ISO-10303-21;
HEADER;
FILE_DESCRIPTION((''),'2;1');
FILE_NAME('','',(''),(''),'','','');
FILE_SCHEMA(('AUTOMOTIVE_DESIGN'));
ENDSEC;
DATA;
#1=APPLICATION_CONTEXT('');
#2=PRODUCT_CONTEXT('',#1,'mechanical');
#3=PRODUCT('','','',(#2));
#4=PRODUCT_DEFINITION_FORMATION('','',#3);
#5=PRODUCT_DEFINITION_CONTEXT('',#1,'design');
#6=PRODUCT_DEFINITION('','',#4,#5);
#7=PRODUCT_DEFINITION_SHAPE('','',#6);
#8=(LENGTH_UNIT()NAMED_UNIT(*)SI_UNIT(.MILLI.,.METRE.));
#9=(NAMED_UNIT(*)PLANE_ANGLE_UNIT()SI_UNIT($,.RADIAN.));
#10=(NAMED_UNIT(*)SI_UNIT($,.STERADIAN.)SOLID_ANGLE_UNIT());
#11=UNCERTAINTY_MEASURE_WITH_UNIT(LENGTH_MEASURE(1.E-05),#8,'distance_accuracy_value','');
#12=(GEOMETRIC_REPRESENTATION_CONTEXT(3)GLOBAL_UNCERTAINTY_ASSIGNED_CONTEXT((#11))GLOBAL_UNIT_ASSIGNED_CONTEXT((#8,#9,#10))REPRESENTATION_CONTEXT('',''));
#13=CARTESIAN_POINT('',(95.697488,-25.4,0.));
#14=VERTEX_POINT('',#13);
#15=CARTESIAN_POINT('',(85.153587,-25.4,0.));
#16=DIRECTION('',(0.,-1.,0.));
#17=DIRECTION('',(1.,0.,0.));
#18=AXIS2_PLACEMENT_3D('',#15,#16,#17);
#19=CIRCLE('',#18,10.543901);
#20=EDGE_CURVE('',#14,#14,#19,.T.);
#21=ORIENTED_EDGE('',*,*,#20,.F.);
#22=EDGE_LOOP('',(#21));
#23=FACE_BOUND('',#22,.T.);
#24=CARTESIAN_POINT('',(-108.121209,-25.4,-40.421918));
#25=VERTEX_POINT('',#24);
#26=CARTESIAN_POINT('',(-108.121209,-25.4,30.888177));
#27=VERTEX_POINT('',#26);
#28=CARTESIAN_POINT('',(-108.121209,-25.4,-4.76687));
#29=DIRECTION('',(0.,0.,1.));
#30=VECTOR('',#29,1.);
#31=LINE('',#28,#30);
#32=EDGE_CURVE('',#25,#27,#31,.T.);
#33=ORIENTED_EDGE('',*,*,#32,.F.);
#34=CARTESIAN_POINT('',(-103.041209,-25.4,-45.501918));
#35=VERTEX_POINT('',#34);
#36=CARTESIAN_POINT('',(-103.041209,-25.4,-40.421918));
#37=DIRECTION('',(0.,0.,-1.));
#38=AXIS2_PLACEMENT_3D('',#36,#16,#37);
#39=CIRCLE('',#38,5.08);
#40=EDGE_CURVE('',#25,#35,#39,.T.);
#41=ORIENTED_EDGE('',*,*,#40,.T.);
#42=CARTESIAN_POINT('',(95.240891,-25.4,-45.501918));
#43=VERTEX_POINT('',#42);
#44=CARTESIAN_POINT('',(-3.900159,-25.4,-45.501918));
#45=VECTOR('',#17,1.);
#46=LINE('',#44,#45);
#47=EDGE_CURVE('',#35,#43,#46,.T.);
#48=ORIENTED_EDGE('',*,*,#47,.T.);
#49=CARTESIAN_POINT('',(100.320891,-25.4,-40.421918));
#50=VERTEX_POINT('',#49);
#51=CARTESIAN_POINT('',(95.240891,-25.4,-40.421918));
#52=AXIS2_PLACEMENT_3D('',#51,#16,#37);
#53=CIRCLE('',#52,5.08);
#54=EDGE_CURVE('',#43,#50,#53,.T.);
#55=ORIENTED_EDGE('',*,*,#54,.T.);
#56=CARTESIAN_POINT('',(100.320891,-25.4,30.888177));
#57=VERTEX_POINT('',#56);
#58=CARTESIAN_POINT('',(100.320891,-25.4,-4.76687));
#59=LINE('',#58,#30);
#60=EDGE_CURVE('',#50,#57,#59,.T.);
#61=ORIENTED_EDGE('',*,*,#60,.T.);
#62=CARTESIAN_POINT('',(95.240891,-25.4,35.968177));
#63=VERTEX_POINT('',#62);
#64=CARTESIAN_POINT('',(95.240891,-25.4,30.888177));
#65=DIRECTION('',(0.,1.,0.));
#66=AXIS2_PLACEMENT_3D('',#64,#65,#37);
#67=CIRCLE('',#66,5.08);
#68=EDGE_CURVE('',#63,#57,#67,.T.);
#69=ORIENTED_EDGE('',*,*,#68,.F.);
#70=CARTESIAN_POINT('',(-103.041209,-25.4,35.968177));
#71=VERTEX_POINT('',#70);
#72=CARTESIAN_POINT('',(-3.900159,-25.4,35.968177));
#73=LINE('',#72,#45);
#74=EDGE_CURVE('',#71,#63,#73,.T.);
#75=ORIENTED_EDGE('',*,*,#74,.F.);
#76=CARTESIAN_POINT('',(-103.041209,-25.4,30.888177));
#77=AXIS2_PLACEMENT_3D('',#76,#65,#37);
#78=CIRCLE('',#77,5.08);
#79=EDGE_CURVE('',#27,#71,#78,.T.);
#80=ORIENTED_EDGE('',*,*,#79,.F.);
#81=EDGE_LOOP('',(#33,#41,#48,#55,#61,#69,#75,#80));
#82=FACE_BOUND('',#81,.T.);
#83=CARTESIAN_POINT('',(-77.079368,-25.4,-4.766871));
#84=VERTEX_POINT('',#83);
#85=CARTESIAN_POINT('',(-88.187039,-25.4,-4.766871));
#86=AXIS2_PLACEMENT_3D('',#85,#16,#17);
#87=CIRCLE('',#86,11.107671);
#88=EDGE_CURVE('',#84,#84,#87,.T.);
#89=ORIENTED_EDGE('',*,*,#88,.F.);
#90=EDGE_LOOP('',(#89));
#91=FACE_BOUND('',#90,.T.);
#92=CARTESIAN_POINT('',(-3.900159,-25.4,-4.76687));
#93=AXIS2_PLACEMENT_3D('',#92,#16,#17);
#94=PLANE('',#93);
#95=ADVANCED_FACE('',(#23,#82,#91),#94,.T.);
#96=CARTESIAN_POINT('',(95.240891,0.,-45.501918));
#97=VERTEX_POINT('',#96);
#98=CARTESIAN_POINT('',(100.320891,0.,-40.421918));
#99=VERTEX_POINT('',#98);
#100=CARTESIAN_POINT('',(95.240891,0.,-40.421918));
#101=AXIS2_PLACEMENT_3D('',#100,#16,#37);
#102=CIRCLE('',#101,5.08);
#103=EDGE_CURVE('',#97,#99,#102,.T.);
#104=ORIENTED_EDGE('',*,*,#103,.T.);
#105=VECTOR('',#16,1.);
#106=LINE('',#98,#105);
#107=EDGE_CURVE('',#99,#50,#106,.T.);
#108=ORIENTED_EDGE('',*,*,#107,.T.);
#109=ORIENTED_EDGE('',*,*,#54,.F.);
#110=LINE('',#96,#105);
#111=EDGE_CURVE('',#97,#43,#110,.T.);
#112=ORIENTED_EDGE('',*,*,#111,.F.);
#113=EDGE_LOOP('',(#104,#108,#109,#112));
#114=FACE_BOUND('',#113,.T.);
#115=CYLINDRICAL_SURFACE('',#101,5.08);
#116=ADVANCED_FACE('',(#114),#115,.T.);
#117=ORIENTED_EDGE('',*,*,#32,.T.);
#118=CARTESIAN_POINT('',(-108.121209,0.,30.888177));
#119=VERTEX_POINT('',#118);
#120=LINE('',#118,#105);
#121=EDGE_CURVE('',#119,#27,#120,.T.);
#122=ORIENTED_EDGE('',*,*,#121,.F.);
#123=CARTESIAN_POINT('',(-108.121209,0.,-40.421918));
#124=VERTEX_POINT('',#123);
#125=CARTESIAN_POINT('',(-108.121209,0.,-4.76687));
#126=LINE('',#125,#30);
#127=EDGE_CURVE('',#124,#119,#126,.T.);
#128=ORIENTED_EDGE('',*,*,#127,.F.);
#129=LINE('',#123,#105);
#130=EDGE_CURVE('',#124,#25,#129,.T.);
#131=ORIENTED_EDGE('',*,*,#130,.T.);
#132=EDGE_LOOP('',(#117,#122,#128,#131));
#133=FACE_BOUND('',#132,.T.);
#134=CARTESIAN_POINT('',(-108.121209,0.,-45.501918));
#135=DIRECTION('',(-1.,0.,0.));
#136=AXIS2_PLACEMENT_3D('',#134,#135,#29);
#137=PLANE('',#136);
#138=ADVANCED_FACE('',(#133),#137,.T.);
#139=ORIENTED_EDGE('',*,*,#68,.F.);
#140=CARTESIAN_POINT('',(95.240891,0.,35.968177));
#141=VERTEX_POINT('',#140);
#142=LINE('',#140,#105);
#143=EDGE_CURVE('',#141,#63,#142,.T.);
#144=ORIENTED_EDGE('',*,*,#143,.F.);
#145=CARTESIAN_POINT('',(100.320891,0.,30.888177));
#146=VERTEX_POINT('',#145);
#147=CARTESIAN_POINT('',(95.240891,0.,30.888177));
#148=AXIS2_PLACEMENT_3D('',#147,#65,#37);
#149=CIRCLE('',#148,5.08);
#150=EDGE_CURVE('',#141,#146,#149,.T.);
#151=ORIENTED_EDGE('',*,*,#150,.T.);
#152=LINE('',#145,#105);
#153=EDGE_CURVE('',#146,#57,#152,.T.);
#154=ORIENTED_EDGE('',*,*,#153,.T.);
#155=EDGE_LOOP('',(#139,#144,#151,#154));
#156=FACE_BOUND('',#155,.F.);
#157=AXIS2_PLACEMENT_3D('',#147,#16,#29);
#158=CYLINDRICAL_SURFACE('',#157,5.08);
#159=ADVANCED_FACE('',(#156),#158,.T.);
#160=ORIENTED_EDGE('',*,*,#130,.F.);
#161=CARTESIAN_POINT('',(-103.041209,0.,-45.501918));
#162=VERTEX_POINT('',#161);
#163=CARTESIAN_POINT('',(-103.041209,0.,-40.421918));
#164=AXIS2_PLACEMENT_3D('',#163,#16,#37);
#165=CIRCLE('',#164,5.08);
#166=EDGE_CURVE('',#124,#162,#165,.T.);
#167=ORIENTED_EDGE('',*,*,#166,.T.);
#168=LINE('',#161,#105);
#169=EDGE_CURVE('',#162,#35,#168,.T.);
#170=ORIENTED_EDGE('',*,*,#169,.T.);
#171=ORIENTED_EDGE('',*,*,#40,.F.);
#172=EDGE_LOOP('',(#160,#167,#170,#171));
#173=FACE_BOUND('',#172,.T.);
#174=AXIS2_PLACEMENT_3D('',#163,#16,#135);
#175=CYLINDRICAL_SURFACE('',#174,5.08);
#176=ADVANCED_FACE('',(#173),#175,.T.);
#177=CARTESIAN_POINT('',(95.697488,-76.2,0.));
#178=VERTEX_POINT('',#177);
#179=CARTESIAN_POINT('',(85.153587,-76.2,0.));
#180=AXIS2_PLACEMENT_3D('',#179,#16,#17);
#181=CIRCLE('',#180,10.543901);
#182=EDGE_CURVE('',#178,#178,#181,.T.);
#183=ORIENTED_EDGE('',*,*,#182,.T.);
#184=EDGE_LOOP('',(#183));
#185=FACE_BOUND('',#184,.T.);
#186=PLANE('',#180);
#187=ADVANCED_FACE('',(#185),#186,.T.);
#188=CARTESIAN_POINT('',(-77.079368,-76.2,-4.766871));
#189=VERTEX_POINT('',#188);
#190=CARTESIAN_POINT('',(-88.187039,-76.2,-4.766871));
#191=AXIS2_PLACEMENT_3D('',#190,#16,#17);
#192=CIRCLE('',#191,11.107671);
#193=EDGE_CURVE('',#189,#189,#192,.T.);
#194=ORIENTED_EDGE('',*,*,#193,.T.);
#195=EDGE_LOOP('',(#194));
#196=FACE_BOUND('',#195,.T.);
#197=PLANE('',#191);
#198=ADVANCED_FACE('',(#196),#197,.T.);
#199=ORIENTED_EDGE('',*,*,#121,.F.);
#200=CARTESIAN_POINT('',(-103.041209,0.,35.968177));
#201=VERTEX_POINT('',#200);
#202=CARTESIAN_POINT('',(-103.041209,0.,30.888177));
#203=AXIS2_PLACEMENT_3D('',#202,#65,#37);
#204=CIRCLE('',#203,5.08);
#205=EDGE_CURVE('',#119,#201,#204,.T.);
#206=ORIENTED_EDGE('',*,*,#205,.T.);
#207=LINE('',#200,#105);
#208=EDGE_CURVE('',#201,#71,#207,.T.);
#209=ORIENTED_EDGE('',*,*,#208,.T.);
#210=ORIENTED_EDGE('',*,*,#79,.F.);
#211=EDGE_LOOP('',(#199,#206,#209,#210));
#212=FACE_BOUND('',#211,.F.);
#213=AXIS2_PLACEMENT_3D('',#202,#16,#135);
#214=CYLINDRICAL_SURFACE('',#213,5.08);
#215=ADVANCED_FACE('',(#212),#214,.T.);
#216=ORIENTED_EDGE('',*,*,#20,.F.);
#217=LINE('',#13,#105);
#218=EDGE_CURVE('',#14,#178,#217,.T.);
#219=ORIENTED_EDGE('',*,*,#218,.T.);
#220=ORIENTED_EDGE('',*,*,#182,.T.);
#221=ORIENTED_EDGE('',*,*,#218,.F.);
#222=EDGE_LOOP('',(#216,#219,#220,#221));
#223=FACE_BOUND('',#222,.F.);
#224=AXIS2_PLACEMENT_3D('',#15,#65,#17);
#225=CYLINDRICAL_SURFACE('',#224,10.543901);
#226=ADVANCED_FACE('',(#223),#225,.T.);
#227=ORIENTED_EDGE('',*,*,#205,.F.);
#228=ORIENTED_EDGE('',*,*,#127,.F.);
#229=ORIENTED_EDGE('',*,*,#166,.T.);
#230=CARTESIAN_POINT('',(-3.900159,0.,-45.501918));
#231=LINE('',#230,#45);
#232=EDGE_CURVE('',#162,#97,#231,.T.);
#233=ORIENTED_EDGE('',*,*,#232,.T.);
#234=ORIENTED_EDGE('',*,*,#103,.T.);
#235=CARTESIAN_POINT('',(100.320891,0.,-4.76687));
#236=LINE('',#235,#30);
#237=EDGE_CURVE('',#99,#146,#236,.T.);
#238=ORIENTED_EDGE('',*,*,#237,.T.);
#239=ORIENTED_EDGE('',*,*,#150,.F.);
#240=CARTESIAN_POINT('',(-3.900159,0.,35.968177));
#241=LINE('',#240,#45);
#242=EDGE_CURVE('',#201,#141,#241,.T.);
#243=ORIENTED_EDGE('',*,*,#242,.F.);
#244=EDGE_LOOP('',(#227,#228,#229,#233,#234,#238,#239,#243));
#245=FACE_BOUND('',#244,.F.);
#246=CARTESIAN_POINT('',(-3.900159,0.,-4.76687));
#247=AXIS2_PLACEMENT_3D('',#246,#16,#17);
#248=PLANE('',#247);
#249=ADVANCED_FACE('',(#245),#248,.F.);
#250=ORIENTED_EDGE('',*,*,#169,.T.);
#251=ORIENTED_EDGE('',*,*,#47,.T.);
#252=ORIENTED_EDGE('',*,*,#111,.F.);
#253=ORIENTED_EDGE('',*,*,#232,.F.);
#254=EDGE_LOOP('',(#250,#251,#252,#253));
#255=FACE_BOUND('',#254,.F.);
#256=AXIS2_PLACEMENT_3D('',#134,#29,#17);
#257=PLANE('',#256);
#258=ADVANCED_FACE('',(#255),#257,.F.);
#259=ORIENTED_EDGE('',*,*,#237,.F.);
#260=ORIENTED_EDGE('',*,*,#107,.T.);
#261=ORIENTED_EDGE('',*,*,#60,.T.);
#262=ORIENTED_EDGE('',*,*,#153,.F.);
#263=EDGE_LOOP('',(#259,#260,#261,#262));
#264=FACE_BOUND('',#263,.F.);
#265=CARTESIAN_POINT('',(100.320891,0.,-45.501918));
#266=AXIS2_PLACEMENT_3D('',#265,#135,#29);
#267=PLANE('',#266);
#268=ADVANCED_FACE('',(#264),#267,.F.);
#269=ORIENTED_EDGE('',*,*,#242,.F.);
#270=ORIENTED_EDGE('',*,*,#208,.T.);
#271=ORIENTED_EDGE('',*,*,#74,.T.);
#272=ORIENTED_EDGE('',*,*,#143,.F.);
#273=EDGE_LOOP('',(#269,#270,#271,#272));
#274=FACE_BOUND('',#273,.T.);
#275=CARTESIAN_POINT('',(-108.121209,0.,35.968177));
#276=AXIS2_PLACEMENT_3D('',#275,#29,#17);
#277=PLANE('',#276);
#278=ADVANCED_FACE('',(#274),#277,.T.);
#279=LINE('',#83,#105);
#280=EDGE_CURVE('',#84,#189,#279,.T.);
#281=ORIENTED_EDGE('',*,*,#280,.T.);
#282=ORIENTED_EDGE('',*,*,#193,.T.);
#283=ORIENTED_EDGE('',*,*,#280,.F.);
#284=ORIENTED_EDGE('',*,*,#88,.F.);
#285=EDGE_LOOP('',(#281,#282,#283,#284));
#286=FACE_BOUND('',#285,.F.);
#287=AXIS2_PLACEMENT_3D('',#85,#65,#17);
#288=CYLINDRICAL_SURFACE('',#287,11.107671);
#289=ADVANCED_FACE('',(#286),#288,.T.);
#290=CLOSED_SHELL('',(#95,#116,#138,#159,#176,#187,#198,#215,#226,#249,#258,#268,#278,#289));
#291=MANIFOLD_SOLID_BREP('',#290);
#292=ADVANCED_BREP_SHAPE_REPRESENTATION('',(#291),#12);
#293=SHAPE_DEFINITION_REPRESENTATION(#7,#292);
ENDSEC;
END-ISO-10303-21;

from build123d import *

# Parameters (mm, degrees)
F0_W     = 208.4420993924
F0_H     = 81.4700946212
F1_DEPTH = 25.4
F2_R     = 11.1076712279
F2_R_2   = 10.5439005504
F3_DEPTH = 50.8
F7_R     = 5.08


# Not quite as in the source:
# - the program builds the solid bodies; features that only make, move or delete a surface that nothing else refers to are left out


with BuildPart() as f1:
    # F0 (on Front) → F1 (new body)
    with BuildSketch(Plane.XZ):
        with Locations((-3.9001591504, -4.76687029)):
            Rectangle(F0_W, F0_H)
    extrude(amount=F1_DEPTH)

    # F2 (on face) → F3 (join)
    with BuildSketch(Plane.XZ.offset(25.4)):
        with Locations((-88.1870388985, -4.7668707557)):
            Circle(F2_R)
        with Locations((85.1535871625, 0)):
            Circle(F2_R_2)
    extrude(amount=F3_DEPTH)

    # F7
    f7_edges = [f1.edges().sort_by_distance(p)[0] for p in [
        (100.320891, -12.7, -45.501918),
        (-108.121209, -12.7, -45.501918),
        (-108.121209, -12.7, 35.968177),
        (100.320891, -12.7, 35.968177),
    ]]
    fillet(f7_edges, radius=F7_R)


solid = f1.part
